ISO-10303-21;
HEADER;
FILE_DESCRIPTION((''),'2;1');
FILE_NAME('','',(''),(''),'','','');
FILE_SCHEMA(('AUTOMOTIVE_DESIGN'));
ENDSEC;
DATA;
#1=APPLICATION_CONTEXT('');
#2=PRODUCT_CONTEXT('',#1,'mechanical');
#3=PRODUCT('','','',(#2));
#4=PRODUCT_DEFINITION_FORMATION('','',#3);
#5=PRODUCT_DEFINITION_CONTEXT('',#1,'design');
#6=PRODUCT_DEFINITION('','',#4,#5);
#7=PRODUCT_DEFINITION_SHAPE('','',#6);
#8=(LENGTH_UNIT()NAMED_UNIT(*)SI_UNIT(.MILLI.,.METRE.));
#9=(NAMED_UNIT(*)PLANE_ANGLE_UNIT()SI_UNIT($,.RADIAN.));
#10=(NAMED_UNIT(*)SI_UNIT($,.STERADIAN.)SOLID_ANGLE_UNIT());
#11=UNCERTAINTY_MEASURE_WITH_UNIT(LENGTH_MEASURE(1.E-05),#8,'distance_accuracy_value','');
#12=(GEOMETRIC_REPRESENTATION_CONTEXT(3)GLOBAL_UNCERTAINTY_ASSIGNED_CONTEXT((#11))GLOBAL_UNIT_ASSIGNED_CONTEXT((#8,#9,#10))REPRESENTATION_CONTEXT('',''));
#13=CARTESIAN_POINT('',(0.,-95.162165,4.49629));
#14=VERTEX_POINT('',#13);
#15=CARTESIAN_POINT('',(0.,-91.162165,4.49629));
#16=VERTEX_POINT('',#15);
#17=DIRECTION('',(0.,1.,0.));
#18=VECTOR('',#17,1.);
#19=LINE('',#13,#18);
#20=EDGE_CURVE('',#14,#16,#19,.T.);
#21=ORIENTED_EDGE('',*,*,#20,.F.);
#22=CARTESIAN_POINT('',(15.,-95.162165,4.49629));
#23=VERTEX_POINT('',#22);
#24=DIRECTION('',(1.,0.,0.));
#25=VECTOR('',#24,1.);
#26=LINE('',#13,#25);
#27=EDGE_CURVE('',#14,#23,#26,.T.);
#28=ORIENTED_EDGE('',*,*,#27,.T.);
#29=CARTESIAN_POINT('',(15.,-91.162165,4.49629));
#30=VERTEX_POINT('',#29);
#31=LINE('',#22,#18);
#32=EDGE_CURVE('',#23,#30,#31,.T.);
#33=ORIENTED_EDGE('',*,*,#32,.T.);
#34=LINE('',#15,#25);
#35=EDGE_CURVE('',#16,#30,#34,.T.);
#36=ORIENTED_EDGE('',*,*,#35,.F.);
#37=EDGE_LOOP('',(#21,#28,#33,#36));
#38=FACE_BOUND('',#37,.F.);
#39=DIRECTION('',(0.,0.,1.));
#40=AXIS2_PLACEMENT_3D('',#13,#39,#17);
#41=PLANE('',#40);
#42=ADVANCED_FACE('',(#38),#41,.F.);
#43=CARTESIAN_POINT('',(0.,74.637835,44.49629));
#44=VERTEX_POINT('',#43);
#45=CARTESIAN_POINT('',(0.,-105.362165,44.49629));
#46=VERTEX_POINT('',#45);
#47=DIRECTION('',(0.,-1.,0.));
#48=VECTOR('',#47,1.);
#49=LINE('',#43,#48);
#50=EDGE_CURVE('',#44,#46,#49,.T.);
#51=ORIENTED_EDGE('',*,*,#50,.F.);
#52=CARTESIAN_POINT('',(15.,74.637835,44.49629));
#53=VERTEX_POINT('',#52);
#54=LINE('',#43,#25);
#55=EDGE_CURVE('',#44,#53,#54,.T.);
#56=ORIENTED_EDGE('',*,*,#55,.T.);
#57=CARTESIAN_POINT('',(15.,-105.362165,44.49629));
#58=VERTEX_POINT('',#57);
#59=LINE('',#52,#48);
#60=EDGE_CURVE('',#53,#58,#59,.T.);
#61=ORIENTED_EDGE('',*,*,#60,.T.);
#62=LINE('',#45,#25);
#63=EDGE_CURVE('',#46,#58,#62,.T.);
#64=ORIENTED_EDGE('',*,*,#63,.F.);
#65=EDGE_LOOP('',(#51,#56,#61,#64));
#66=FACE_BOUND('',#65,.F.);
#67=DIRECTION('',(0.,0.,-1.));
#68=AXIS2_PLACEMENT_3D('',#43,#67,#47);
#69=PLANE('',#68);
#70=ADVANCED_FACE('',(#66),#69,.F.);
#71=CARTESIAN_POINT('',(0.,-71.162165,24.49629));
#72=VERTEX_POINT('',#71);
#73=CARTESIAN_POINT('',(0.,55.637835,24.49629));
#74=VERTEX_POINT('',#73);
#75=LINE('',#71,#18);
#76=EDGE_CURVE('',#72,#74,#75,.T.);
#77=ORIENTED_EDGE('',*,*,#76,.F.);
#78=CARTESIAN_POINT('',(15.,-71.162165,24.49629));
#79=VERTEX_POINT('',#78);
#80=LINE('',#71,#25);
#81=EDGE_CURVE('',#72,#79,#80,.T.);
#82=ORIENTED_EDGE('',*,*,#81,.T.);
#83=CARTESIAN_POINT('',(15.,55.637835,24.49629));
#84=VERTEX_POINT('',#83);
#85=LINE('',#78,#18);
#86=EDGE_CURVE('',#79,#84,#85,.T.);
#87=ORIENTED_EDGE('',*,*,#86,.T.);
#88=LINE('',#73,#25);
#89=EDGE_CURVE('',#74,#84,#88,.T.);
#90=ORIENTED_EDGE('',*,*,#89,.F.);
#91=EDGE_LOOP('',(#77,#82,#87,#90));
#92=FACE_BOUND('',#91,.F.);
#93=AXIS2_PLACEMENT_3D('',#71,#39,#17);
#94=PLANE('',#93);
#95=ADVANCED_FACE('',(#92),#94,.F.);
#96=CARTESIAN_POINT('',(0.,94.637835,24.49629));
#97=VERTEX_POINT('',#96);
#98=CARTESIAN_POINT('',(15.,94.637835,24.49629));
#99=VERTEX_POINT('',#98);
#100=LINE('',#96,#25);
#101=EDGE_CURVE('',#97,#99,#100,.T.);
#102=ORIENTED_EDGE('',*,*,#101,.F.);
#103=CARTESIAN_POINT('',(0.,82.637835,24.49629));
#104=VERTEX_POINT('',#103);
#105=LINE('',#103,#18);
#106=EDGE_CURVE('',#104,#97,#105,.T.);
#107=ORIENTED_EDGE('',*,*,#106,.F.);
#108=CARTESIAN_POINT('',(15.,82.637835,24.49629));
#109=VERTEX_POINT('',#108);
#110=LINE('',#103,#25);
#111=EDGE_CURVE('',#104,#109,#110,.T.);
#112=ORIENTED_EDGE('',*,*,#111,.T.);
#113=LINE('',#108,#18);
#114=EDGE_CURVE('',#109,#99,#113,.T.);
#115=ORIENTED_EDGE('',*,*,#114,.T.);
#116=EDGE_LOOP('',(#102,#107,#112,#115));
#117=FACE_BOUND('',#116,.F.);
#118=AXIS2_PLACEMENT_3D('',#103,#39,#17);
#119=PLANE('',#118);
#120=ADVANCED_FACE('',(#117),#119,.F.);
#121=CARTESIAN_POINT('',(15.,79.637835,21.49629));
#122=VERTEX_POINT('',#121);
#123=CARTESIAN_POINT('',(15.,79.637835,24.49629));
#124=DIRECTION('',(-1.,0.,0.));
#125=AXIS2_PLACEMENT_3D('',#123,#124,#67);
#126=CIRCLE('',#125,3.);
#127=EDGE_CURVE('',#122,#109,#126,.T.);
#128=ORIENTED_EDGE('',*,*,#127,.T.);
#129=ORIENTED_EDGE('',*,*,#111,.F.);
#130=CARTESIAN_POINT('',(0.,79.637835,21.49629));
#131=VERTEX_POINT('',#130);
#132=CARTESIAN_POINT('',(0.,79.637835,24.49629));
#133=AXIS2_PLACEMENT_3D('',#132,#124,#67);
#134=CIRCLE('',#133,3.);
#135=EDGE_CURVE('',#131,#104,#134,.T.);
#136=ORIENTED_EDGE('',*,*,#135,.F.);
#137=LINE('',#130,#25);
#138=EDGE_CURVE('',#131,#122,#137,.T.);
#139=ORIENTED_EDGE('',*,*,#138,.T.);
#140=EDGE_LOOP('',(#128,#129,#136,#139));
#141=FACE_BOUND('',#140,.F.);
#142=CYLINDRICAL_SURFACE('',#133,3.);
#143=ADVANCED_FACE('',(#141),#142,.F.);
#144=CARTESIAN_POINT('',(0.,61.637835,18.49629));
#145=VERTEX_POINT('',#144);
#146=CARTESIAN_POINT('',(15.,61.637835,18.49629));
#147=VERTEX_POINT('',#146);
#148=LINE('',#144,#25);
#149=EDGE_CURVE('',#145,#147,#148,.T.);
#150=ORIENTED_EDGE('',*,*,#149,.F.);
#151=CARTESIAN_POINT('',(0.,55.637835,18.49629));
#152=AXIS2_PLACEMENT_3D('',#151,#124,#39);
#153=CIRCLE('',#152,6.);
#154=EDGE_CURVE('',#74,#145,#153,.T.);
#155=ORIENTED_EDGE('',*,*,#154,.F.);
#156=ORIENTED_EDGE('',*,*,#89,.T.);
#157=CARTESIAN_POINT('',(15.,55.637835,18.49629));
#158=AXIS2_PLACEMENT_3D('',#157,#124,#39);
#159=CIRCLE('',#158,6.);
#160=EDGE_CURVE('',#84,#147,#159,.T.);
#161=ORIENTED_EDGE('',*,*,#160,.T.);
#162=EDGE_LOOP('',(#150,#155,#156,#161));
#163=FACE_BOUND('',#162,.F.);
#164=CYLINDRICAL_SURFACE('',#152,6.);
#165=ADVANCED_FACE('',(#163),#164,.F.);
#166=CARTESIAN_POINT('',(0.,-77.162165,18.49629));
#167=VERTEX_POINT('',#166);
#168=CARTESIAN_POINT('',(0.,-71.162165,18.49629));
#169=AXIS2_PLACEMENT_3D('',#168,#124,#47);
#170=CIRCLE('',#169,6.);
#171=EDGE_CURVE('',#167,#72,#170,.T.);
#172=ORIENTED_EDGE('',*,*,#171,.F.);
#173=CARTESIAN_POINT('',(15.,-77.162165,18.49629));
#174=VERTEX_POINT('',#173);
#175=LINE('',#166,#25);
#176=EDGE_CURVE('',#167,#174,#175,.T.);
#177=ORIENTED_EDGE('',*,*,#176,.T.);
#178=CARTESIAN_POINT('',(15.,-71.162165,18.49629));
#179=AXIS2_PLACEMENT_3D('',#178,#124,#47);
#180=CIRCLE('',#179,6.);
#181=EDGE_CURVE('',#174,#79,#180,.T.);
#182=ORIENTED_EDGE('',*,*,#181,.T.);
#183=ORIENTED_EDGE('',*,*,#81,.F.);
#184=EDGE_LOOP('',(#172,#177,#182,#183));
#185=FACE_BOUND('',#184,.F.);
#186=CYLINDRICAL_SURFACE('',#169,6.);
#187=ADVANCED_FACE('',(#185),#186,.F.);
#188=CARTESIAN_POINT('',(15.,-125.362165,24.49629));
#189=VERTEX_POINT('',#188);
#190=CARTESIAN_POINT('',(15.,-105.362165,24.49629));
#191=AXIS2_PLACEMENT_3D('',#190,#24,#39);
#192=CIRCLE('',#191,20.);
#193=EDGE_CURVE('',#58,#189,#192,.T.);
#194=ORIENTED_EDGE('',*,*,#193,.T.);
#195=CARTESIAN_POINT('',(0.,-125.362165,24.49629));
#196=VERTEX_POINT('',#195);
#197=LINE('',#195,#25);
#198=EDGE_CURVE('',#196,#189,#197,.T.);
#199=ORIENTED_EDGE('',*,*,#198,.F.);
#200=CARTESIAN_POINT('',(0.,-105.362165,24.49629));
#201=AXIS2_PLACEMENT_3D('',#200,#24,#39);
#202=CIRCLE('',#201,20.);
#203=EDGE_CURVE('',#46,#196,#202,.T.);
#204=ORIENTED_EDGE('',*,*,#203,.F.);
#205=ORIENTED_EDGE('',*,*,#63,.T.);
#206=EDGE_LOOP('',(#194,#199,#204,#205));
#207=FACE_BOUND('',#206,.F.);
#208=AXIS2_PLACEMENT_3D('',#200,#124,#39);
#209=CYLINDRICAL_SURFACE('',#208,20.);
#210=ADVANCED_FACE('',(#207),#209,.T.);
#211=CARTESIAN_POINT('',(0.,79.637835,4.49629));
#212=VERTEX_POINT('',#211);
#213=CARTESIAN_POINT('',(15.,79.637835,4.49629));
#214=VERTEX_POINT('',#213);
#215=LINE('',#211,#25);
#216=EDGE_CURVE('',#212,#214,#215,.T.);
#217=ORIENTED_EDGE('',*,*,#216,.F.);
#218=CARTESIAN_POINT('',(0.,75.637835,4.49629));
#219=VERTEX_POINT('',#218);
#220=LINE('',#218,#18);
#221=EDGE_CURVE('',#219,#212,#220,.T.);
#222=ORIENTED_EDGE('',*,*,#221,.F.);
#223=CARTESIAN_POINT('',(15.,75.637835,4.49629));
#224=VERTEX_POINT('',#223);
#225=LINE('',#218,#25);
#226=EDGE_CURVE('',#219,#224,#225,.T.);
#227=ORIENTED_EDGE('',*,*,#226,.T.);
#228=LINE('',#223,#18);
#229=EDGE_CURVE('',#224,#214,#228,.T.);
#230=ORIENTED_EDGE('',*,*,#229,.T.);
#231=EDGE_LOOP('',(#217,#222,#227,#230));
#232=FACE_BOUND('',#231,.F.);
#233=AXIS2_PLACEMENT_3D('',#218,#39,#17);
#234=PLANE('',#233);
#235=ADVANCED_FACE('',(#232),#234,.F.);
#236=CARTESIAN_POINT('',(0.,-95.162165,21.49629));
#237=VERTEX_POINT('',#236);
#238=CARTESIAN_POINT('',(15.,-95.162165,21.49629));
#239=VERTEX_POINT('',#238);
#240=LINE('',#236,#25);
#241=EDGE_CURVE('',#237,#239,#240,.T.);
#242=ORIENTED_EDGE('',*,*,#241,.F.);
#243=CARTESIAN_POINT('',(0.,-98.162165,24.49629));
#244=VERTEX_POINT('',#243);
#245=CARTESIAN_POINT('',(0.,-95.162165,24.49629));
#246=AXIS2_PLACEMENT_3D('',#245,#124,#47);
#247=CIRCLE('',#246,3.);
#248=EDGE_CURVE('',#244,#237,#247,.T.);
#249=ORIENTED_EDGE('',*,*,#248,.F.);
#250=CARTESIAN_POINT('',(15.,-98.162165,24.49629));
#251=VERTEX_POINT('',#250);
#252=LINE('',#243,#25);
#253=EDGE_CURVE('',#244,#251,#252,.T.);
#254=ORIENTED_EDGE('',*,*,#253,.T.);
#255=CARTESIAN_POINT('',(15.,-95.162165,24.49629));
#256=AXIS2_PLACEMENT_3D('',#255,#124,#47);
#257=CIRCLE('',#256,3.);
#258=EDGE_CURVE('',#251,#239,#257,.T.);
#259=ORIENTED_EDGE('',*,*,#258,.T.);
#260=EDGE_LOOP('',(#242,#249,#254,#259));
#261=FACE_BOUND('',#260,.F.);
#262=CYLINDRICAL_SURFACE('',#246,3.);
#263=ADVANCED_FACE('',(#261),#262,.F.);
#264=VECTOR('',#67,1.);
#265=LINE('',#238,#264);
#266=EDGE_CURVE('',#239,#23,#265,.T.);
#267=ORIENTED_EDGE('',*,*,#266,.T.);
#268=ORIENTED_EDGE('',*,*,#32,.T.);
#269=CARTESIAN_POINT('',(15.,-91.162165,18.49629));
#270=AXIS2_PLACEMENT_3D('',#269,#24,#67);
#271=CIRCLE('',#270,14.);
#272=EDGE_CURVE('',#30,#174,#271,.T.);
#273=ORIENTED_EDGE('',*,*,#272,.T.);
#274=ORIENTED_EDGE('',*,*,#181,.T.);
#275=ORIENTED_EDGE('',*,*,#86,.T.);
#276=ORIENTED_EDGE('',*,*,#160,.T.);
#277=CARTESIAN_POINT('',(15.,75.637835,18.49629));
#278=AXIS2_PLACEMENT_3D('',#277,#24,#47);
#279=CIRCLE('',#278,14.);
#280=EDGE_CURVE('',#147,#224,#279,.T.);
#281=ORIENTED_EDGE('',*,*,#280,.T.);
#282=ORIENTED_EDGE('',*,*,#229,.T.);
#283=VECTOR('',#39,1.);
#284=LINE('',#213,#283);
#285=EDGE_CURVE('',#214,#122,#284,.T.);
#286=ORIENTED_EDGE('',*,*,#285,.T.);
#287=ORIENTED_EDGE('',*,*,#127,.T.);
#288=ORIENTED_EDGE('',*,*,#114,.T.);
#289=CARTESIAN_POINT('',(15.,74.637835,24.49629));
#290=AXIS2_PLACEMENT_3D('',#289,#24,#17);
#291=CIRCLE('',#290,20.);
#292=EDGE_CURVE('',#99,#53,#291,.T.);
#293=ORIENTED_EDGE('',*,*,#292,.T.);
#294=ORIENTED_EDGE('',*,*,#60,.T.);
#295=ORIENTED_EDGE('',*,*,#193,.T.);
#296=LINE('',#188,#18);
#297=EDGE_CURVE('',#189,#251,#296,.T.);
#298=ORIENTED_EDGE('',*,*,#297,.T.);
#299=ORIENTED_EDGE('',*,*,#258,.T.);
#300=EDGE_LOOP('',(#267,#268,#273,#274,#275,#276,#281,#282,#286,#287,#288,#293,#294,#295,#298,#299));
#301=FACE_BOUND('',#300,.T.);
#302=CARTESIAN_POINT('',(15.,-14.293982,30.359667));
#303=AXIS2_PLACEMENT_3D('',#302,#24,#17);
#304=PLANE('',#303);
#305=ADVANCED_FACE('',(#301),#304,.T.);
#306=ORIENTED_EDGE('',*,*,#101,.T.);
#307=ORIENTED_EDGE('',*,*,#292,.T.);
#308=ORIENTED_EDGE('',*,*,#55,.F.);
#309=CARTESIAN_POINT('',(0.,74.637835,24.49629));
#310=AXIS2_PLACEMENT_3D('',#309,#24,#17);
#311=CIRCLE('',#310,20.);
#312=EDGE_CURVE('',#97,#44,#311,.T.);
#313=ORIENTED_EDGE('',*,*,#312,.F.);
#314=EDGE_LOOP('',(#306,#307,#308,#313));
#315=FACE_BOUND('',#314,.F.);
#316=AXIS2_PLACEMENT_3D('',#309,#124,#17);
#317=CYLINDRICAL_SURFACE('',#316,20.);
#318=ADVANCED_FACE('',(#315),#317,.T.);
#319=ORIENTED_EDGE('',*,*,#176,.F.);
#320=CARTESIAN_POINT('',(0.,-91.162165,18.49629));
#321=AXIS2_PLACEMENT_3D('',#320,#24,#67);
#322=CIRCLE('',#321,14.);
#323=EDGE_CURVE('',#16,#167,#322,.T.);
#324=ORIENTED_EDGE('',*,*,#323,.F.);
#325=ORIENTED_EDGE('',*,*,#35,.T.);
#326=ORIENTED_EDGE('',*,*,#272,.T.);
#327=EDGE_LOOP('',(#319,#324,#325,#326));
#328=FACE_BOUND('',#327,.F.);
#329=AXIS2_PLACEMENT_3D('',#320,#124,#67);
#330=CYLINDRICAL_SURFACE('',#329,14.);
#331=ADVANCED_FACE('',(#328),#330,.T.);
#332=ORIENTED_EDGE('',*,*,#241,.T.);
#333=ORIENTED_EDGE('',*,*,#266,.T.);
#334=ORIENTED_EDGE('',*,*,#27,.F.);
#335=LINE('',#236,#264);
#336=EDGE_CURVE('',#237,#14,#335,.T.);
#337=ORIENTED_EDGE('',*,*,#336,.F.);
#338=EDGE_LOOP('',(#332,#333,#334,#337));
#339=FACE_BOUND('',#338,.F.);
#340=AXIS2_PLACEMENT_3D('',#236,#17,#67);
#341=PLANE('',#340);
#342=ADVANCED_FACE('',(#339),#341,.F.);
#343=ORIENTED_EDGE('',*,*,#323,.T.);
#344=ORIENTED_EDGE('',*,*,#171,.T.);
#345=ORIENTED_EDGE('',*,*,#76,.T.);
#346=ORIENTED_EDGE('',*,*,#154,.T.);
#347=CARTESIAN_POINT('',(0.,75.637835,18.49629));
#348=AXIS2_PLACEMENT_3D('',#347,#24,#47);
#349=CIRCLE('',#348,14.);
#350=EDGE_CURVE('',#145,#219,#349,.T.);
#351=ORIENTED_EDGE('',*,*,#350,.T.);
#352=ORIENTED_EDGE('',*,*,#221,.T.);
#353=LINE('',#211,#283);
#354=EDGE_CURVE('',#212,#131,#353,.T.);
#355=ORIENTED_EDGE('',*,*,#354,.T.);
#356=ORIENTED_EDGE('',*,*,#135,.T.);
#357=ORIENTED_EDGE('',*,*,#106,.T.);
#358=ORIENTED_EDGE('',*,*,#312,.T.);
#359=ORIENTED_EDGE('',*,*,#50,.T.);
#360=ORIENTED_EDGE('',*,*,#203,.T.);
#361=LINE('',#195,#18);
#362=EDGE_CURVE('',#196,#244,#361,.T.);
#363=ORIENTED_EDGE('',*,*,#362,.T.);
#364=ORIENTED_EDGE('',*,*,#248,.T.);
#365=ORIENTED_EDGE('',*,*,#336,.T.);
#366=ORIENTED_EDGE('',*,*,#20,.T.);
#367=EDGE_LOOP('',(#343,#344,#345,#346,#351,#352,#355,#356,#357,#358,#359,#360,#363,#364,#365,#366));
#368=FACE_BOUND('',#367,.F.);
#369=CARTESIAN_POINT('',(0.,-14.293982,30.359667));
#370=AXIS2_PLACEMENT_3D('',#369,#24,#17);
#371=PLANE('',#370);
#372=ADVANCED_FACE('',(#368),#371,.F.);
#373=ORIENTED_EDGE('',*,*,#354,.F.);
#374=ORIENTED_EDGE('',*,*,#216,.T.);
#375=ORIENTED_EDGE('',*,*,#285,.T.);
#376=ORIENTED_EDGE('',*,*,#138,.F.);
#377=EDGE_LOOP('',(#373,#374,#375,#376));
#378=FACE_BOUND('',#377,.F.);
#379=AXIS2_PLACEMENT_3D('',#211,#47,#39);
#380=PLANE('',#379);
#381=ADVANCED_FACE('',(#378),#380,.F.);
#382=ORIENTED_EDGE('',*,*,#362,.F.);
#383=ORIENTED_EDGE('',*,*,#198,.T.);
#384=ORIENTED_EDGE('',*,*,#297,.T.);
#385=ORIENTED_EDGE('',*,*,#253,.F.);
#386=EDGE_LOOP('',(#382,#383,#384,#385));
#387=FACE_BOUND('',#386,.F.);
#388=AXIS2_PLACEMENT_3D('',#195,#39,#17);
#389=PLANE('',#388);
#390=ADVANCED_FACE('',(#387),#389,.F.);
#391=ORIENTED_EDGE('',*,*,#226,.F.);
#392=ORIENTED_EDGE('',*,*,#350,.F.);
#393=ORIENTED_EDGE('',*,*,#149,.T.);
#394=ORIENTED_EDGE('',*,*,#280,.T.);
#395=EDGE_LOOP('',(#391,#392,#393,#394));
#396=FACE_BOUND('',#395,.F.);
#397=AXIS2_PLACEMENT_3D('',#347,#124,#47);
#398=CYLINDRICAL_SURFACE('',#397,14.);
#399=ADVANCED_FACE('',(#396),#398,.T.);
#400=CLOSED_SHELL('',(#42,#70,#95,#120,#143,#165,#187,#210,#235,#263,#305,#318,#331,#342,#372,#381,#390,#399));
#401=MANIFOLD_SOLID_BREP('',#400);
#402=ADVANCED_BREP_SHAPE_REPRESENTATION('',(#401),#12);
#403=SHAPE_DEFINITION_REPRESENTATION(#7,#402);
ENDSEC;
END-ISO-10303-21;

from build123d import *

# Parameters (mm, degrees)
F1_DEPTH = 15


# Not quite as in the source:
# - a feature names something its author has since deleted; it is built from what else it names


with BuildPart() as f1:
    # F0 (on Right) → F1 (new body)
    with BuildSketch(Plane.YZ):
        with BuildLine():
            Line((-15.3621651637, 44.4962902069), (-105.3621651637, 44.4962902069))
            ThreePointArc((-105.3621651637, 44.4962902069), (-119.5043007874, 38.6384258306), (-125.3621651637, 24.4962902069))
            Line((-125.3621651637, 24.4962902069), (-98.1621651637, 24.4962902069))
            ThreePointArc((-98.1621651637, 24.4962902069), (-93.0408448201, 26.6176105505), (-95.1621651637, 21.4962902069))
            Line((-95.1621651637, 21.4962902069), (-95.1621651637, 4.4962902069))
            Line((-95.1621651637, 4.4962902069), (-91.1621651637, 4.4962902069))
            ThreePointArc((-91.1621651637, 4.4962902069), (-81.2626702271, 8.5967952703), (-77.1621651637, 18.4962902069))
            ThreePointArc((-77.1621651637, 18.4962902069), (-75.4048058508, 22.738930894), (-71.1621651637, 24.4962902069))
            Line((-71.1621651637, 24.4962902069), (-15.3621651637, 24.4962902069))
            Line((-15.3621651637, 24.4962902069), (40.4378348363, 24.4962902069))
            Line((40.4378348363, 24.4962902069), (55.6378348363, 24.4962902069))
            ThreePointArc((55.6378348363, 24.4962902069), (59.8804755234, 22.738930894), (61.6378348363, 18.4962902069))
            ThreePointArc((61.6378348363, 18.4962902069), (65.7383398997, 8.5967952703), (75.6378348363, 4.4962902069))
            Line((75.6378348363, 4.4962902069), (79.6378348363, 4.4962902069))
            Line((79.6378348363, 4.4962902069), (79.6378348363, 21.4962902069))
            ThreePointArc((79.6378348363, 21.4962902069), (77.5165144927, 26.6176105505), (82.6378348363, 24.4962902069))
            Line((82.6378348363, 24.4962902069), (94.6378348363, 24.4962902069))
            ThreePointArc((94.6378348363, 24.4962902069), (88.77997046, 38.6384258306), (74.6378348363, 44.4962902069))
            Line((74.6378348363, 44.4962902069), (-15.3621651637, 44.4962902069))
        make_face()
    extrude(amount=F1_DEPTH)


solid = f1.part
